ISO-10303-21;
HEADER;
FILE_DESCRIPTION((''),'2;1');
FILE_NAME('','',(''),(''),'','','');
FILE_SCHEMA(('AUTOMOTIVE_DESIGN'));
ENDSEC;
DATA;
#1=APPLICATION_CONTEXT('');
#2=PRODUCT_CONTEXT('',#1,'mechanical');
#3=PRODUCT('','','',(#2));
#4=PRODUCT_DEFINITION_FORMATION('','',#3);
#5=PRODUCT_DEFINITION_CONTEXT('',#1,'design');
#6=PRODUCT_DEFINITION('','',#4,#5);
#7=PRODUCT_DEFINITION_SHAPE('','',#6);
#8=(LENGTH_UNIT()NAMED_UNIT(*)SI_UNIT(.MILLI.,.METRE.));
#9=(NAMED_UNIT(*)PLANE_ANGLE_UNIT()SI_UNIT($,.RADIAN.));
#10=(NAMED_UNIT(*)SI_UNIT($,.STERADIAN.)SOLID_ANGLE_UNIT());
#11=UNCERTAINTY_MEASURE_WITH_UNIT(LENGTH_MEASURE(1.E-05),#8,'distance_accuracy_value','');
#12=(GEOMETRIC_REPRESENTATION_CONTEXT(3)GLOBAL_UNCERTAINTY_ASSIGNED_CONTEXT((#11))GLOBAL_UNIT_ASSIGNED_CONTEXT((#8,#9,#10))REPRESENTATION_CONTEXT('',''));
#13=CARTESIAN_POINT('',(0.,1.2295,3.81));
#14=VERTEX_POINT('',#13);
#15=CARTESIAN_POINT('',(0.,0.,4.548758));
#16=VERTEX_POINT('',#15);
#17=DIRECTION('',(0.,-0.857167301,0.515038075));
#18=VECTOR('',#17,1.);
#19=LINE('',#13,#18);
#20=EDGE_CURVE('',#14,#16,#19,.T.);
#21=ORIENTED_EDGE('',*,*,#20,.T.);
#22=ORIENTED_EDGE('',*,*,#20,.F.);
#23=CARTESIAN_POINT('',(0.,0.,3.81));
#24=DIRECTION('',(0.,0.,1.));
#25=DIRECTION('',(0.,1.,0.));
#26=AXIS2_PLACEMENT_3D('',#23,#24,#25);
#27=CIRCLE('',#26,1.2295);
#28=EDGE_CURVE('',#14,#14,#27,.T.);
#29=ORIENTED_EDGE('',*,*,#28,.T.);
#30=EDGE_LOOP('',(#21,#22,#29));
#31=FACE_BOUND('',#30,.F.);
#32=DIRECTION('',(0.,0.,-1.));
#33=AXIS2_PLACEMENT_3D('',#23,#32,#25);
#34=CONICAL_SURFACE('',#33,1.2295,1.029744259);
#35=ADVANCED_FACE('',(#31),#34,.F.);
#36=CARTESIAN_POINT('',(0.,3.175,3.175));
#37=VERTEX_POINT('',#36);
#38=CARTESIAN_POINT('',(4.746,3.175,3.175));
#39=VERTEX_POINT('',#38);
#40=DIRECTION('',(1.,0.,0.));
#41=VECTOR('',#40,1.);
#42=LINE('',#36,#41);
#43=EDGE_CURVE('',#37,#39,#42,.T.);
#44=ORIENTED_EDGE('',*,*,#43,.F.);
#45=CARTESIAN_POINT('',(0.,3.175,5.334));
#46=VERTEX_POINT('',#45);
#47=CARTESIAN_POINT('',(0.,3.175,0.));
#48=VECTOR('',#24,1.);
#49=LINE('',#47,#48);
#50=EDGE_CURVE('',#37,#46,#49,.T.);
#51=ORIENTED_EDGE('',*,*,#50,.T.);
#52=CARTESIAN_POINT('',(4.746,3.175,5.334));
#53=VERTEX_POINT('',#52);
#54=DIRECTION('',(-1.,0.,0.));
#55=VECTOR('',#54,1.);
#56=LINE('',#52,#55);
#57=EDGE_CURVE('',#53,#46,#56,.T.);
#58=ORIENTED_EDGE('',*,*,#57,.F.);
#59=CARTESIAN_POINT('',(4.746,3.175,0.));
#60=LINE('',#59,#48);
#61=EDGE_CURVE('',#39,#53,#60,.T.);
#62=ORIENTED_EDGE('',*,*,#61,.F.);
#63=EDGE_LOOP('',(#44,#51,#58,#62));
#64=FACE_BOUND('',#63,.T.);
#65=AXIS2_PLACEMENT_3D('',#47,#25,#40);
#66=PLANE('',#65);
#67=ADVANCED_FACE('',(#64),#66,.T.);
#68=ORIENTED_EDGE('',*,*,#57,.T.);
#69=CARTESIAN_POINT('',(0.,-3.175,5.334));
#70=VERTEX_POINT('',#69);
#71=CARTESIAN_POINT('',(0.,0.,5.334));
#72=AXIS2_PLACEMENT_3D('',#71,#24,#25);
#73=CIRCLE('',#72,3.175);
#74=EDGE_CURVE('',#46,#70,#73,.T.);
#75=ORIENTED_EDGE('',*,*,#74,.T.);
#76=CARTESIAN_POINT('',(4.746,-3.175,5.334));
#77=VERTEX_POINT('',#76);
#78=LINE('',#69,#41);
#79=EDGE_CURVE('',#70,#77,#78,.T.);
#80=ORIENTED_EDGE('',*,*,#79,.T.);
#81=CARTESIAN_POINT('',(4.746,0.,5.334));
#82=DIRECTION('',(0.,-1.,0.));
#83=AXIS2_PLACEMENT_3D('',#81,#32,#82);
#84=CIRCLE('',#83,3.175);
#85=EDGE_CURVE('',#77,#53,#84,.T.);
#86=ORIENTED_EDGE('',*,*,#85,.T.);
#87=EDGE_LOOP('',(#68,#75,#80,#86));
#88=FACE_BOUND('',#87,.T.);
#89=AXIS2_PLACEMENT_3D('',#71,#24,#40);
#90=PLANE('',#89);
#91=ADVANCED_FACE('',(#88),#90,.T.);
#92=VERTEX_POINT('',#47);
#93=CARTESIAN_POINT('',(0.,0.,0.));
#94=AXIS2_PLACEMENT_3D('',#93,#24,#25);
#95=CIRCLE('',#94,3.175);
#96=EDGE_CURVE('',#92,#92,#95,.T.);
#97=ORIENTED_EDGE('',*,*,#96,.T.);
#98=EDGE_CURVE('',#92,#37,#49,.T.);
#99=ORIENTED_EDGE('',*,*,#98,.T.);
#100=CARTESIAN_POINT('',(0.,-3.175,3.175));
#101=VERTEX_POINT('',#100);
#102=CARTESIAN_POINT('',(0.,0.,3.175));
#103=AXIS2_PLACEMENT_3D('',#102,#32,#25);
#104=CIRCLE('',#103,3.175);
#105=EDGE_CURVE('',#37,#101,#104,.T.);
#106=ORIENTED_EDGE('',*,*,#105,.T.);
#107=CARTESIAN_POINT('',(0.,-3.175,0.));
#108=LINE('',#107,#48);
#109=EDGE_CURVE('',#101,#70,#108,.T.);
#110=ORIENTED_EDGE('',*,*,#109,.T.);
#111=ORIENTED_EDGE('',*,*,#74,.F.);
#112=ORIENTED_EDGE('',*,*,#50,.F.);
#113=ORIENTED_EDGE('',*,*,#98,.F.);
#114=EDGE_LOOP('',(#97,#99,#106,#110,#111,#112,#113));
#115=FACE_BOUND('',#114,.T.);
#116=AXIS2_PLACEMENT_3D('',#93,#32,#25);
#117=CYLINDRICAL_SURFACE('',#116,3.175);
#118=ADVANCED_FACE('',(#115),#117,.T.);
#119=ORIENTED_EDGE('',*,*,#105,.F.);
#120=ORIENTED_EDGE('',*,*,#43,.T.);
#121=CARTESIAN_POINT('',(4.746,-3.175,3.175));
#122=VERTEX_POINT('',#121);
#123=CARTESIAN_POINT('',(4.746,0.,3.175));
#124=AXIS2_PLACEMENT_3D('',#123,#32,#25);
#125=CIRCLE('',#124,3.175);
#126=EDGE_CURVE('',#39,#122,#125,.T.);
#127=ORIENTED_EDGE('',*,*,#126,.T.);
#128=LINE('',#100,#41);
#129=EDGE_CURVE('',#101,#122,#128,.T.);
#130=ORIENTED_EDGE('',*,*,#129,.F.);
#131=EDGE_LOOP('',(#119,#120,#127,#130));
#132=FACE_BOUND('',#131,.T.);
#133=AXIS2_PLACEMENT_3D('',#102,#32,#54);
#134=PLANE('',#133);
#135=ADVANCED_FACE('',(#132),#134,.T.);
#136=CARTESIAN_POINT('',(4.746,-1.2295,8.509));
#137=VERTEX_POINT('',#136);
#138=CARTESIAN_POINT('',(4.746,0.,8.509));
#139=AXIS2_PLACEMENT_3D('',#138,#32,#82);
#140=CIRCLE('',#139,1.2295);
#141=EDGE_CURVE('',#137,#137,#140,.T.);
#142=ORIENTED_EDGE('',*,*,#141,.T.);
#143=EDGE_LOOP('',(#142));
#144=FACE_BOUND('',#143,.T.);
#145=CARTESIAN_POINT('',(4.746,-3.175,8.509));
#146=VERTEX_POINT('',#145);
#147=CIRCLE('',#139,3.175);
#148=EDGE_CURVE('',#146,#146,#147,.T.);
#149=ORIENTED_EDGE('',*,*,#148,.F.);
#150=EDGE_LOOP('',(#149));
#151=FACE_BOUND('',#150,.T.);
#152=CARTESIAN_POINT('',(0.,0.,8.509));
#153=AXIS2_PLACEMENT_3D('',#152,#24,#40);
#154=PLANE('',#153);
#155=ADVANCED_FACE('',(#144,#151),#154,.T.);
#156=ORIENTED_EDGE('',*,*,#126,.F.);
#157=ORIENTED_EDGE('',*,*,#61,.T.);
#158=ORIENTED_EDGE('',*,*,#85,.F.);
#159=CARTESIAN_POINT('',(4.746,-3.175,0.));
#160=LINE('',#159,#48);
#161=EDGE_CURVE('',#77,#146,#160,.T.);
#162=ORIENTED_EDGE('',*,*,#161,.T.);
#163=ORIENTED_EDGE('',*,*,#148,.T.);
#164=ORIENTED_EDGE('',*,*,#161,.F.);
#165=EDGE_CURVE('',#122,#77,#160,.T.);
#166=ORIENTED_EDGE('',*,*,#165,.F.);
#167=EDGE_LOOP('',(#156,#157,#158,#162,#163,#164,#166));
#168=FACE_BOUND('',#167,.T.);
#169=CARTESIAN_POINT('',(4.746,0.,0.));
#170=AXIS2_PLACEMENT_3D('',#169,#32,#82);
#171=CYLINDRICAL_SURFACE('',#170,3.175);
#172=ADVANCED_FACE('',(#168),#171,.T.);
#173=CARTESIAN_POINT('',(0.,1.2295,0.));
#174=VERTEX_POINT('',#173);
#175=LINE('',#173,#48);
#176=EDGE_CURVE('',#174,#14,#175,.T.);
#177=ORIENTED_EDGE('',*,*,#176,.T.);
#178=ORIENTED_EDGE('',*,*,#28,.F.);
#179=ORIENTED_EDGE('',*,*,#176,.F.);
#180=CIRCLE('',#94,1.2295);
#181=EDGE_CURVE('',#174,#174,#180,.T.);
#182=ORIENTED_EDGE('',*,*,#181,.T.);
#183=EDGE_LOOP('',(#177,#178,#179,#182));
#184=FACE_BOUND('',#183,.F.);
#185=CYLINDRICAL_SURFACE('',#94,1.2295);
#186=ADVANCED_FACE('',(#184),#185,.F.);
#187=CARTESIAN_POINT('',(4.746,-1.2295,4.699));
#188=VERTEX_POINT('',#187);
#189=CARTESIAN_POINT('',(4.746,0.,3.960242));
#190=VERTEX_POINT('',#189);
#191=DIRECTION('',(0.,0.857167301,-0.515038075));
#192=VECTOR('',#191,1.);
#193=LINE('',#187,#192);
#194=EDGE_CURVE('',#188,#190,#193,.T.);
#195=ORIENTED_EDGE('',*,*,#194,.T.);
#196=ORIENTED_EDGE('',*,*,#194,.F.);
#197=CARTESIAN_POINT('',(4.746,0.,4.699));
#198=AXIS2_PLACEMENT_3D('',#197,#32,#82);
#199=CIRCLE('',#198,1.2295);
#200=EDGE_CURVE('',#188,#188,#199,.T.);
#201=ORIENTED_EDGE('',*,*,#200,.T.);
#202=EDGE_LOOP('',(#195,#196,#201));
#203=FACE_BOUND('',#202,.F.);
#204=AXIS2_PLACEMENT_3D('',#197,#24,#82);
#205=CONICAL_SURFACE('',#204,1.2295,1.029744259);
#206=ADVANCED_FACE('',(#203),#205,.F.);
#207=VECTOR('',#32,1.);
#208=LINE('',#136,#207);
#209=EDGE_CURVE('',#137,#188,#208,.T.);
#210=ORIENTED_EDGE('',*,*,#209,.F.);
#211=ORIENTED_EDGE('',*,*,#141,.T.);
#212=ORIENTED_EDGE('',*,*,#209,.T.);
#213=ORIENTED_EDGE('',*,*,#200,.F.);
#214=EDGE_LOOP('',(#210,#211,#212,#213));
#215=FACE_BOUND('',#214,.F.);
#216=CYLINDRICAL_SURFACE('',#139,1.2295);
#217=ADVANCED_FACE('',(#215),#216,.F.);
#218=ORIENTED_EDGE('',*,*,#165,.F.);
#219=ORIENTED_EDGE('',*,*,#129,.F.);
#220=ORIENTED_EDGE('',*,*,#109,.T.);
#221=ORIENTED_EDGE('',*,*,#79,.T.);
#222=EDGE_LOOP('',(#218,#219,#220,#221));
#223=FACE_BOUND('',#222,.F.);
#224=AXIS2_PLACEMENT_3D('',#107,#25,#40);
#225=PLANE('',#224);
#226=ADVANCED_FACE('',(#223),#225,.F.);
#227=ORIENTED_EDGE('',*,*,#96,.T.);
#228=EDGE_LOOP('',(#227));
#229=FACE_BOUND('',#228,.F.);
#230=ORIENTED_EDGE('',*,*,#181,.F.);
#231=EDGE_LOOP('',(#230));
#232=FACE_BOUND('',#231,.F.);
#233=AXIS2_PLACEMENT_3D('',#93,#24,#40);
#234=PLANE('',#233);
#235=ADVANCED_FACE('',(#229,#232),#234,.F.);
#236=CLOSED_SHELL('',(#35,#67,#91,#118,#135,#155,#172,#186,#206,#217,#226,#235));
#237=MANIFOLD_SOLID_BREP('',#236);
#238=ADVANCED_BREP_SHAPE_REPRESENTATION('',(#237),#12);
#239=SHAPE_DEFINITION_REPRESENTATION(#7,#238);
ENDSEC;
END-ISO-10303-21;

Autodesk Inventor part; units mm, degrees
ref_plane "YZ Plane" through (0, 0, 0) normal (1, 0, 0) x (0, 1, 0)
ref_plane "XZ Plane" through (0, 0, 0) normal (0, 1, 0) x (-1, 0, 0)
ref_plane "XY Plane" through (0, 0, 0) normal (0, 0, 1) x (1, 0, 0)
sketch "Sketch2" plane through (0, 0, 0) normal (0, 0, 1) x (1, 0, 0)
  arc A0 (4.746, -3.175) -> (4.746, 3.175) centre (4.746, 0) ccw
  arc A1 (0, 3.175) -> (0, -3.175) centre (0, 0) ccw
  line L0 (0, 3.175) -> (4.746, 3.175)
  line L1 (0, -3.175) -> (4.746, -3.175)
  dimension "d14" = 6.35
  dimension "d15" = 6.35
  dimension "d16" = 0
  dimension "d17" = 0
  dimension "d18" = 4.746
  dimension "d19" = 0
extrude "Extrusion2" add sketch "Sketch2" along normal blind 8.509
sketch "Sketch3" plane through (0, 0, 8.509) normal (0, 0, 1) x (1, 0, 0)
  arc A0 (4.746, -3.175) -> (4.746, 3.175) centre (4.746, 0) ccw projected
  arc A1 (4.746, -3.175) -> (4.746, 3.175) centre (4.746, 0) ccw projected
  point P0 (0, 0)
  point P1 (7.921, 0)
  dimension "d22" = 4.746
  dimension "d23" = 0
  dimension "d44" = 3.175
hole "Hole1" at (4.746, 0, 8.509) direction (0, 0, -1) diameter 2.459 depth 3.81 tip angle 118 thread size "M3x0.5" class "6H" standard "ISO Metric profile"
sketch "Sketch4" plane through (0, 0, 0) normal (0, 0, -1) x (-1, 0, 0)
  point P0 (0, 0)
hole "Hole2" at (0, 0, 0) direction (0, 0, 1) diameter 2.459 depth 3.81 tip angle 118 thread size "M3x0.5" class "6H" standard "ISO Metric profile"
sketch "Sketch5" plane through (0, 0, 0) normal (0, 0, -1) x (-1, 0, 0)
  arc A0 (-4.746, 3.175) -> (-4.746, -3.175) centre (-4.746, 0) ccw
  arc A1 (0, 3.175) -> (0, -3.175) centre (0, 0) ccw
  line L0 (0, 3.175) -> (-4.746, 3.175)
  arc A2 (0, -3.175) -> (0, 3.175) centre (0, 0) ccw projected
  line L1 (0, -3.175) -> (-4.746, -3.175)
  dimension "d42" = 4.746
extrude "Extrusion3" cut sketch "Sketch5" against normal blind 3.175 from surface at 0 contours L0 A1 L1 A0
sketch "Sketch11" plane through (0, 0, 8.509) normal (0, 0, 1) x (1, 0, 0)
  arc A0 (0, 3.175) -> (0, -3.175) centre (0, 0) ccw
  arc A1 (4.746, -3.175) -> (4.746, 3.175) centre (4.746, 0) ccw projected
  arc A2 (4.746, 3.175) -> (4.746, -3.175) centre (4.746, 0) ccw
  line L0 (0, 3.175) -> (4.746, 3.175)
  line L1 (4.746, -3.175) -> (0, -3.175)
sketch "Sketch11 outline for Extrusion5" plane through (0, 0, 8.509) normal (0, 0, 1) x (1, 0, 0)
  arc A0 (4.746, -3.175) -> (4.746, 3.175) centre (4.746, 0) cw
  line L0 (0, -3.175) -> (4.746, -3.175)
  arc A1 (0, 3.175) -> (0, -3.175) centre (0, 0) ccw
  line L1 (4.746, 3.175) -> (0, 3.175)
extrude "Extrusion5" cut sketch "Sketch11 outline for Extrusion5" against normal blind 3.175
properties part number "PC104_EM-113 standoff_4.746"
